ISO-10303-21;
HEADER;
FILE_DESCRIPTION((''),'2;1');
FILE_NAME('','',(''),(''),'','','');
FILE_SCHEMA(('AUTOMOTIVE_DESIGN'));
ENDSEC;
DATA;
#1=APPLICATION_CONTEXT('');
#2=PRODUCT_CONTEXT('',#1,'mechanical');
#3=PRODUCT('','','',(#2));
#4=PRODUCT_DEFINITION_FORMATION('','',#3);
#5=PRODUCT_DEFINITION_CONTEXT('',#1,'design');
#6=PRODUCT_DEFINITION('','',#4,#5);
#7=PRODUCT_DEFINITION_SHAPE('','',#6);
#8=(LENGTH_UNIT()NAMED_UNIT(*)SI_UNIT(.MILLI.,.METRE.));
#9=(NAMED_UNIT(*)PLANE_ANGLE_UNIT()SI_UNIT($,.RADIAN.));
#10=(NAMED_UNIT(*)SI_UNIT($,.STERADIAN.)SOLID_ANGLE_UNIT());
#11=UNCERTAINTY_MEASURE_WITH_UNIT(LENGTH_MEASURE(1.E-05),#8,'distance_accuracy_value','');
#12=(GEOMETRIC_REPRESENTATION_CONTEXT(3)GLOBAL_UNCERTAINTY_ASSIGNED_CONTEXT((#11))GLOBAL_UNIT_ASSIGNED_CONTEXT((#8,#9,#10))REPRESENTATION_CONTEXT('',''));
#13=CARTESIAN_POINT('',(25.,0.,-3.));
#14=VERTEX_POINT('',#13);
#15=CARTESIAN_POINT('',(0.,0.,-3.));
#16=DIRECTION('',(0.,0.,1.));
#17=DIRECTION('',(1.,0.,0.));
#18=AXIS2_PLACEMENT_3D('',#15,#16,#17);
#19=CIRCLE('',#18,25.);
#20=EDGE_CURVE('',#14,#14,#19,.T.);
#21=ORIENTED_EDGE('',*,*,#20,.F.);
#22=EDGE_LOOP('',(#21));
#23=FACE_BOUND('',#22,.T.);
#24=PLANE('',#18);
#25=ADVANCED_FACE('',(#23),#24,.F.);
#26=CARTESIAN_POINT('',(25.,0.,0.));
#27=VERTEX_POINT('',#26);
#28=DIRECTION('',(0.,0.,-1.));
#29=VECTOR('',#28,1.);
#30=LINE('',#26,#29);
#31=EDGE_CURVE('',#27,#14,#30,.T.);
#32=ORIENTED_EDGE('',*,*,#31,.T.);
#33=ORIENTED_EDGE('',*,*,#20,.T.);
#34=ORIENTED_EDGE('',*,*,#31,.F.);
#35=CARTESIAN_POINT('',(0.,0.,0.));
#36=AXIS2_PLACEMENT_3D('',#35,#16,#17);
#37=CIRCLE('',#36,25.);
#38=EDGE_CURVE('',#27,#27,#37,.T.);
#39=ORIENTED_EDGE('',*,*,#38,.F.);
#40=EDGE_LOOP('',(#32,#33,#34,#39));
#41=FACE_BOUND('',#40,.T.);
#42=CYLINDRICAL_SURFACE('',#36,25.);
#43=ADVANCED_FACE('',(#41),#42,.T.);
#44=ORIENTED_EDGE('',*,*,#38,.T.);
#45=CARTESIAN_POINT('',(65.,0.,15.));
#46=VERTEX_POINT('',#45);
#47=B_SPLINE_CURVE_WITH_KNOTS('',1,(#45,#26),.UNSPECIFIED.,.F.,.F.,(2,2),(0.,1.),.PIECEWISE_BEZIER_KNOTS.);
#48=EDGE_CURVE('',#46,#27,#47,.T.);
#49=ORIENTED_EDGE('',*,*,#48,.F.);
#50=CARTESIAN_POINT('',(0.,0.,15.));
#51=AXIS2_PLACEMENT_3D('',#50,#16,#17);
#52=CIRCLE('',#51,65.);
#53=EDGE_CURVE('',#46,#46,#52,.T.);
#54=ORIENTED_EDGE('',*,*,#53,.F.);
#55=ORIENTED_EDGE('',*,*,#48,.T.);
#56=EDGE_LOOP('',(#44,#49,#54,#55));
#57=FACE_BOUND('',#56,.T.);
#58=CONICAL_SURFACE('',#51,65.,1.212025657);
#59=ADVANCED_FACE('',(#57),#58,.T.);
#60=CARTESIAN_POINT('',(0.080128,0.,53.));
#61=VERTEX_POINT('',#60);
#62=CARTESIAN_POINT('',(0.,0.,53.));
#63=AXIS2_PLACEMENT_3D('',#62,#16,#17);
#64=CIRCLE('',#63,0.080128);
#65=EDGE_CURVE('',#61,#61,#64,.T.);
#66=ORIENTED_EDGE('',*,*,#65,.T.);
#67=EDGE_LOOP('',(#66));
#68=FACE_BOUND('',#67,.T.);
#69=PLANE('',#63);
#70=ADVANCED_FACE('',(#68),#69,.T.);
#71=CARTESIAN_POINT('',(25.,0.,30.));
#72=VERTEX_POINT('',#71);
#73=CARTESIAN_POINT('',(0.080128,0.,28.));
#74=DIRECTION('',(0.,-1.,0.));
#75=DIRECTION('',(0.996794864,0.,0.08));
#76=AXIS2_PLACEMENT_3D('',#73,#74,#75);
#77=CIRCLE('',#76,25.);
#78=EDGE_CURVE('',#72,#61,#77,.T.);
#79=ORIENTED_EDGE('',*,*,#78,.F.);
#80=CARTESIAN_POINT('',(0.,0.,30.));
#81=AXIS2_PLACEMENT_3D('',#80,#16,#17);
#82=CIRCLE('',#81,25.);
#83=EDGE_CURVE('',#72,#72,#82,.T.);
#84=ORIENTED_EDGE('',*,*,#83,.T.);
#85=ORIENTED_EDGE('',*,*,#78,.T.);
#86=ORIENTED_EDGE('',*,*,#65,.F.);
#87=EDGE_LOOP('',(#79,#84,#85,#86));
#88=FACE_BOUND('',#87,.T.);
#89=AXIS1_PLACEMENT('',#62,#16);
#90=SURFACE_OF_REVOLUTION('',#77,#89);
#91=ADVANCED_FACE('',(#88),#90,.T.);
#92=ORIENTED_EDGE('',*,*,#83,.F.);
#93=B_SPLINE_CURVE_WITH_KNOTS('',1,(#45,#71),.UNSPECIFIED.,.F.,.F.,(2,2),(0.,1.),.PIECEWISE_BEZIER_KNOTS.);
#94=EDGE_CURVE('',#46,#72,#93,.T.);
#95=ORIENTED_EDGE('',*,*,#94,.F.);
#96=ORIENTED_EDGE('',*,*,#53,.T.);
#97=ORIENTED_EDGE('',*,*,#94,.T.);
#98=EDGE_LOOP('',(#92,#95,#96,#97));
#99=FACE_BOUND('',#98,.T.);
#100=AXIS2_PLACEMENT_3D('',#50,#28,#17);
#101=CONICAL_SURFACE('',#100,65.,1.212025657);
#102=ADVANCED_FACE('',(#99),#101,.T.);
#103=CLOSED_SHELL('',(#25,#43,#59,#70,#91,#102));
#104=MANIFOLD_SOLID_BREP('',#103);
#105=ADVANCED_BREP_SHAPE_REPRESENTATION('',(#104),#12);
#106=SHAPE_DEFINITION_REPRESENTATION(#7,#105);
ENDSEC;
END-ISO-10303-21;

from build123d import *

# Parameters (mm, degrees)
F2_R      = 65
F3_R      = 25
F5_FACE_R = 65
F4_R      = 25
F7_DEPTH  = 23
F9_DEPTH  = 3


# Not quite as in the source:
# - a fillet or chamfer that OpenCascade refuses, or shapes differently, is made with other operations: its cross-section is extruded or revolved along the edge and cut away or added


with BuildPart() as f5:
    # F2 (on offset) → F5 section 0
    with BuildSketch(Plane.XY.offset(15)):
        Circle(F2_R)
    # F3 (on offset) → F5 section 1
    with BuildSketch(Plane.XY.offset(30)):
        Circle(F3_R)
    loft()

    # F5_face (on face) → F6 section 0
    with BuildSketch(Plane(origin=(0, 0, 15), x_dir=(1, 0, 0), z_dir=(0, 0, -1))):
        Circle(F5_FACE_R)
    # F4 (on Top) → F6 section 1
    with BuildSketch(Plane.XY):
        Circle(F4_R)
    loft()

    # F7 (add): a face of the model
    f7_faces = [f5.faces().sort_by_distance(p)[0] for p in [
        (0, 0, 30),
    ]]
    extrude(f7_faces, amount=F7_DEPTH)

    # F8: fillet of radius 25 on 1 edges, made by hand

    # F8_s1 → F8_t2 (revolve, cut)
    with BuildSketch(Plane.XZ):
        with BuildLine():
            ThreePointArc((25, 30), (17.0359533691, 46.3711730709), (0.0801284112, 53))
            Line((0.0801284112, 53), (25, 53))
            Line((25, 53), (25, 30))
        make_face()
    revolve(axis=Axis((0, 0, 53), (0, 0, 1)), mode=Mode.SUBTRACT)

    # F9 (add): a face of the model
    f9_faces = [f5.faces().sort_by_distance(p)[0] for p in [
        (0, 0, 0),
    ]]
    extrude(f9_faces, amount=F9_DEPTH)


solid = f5.part
